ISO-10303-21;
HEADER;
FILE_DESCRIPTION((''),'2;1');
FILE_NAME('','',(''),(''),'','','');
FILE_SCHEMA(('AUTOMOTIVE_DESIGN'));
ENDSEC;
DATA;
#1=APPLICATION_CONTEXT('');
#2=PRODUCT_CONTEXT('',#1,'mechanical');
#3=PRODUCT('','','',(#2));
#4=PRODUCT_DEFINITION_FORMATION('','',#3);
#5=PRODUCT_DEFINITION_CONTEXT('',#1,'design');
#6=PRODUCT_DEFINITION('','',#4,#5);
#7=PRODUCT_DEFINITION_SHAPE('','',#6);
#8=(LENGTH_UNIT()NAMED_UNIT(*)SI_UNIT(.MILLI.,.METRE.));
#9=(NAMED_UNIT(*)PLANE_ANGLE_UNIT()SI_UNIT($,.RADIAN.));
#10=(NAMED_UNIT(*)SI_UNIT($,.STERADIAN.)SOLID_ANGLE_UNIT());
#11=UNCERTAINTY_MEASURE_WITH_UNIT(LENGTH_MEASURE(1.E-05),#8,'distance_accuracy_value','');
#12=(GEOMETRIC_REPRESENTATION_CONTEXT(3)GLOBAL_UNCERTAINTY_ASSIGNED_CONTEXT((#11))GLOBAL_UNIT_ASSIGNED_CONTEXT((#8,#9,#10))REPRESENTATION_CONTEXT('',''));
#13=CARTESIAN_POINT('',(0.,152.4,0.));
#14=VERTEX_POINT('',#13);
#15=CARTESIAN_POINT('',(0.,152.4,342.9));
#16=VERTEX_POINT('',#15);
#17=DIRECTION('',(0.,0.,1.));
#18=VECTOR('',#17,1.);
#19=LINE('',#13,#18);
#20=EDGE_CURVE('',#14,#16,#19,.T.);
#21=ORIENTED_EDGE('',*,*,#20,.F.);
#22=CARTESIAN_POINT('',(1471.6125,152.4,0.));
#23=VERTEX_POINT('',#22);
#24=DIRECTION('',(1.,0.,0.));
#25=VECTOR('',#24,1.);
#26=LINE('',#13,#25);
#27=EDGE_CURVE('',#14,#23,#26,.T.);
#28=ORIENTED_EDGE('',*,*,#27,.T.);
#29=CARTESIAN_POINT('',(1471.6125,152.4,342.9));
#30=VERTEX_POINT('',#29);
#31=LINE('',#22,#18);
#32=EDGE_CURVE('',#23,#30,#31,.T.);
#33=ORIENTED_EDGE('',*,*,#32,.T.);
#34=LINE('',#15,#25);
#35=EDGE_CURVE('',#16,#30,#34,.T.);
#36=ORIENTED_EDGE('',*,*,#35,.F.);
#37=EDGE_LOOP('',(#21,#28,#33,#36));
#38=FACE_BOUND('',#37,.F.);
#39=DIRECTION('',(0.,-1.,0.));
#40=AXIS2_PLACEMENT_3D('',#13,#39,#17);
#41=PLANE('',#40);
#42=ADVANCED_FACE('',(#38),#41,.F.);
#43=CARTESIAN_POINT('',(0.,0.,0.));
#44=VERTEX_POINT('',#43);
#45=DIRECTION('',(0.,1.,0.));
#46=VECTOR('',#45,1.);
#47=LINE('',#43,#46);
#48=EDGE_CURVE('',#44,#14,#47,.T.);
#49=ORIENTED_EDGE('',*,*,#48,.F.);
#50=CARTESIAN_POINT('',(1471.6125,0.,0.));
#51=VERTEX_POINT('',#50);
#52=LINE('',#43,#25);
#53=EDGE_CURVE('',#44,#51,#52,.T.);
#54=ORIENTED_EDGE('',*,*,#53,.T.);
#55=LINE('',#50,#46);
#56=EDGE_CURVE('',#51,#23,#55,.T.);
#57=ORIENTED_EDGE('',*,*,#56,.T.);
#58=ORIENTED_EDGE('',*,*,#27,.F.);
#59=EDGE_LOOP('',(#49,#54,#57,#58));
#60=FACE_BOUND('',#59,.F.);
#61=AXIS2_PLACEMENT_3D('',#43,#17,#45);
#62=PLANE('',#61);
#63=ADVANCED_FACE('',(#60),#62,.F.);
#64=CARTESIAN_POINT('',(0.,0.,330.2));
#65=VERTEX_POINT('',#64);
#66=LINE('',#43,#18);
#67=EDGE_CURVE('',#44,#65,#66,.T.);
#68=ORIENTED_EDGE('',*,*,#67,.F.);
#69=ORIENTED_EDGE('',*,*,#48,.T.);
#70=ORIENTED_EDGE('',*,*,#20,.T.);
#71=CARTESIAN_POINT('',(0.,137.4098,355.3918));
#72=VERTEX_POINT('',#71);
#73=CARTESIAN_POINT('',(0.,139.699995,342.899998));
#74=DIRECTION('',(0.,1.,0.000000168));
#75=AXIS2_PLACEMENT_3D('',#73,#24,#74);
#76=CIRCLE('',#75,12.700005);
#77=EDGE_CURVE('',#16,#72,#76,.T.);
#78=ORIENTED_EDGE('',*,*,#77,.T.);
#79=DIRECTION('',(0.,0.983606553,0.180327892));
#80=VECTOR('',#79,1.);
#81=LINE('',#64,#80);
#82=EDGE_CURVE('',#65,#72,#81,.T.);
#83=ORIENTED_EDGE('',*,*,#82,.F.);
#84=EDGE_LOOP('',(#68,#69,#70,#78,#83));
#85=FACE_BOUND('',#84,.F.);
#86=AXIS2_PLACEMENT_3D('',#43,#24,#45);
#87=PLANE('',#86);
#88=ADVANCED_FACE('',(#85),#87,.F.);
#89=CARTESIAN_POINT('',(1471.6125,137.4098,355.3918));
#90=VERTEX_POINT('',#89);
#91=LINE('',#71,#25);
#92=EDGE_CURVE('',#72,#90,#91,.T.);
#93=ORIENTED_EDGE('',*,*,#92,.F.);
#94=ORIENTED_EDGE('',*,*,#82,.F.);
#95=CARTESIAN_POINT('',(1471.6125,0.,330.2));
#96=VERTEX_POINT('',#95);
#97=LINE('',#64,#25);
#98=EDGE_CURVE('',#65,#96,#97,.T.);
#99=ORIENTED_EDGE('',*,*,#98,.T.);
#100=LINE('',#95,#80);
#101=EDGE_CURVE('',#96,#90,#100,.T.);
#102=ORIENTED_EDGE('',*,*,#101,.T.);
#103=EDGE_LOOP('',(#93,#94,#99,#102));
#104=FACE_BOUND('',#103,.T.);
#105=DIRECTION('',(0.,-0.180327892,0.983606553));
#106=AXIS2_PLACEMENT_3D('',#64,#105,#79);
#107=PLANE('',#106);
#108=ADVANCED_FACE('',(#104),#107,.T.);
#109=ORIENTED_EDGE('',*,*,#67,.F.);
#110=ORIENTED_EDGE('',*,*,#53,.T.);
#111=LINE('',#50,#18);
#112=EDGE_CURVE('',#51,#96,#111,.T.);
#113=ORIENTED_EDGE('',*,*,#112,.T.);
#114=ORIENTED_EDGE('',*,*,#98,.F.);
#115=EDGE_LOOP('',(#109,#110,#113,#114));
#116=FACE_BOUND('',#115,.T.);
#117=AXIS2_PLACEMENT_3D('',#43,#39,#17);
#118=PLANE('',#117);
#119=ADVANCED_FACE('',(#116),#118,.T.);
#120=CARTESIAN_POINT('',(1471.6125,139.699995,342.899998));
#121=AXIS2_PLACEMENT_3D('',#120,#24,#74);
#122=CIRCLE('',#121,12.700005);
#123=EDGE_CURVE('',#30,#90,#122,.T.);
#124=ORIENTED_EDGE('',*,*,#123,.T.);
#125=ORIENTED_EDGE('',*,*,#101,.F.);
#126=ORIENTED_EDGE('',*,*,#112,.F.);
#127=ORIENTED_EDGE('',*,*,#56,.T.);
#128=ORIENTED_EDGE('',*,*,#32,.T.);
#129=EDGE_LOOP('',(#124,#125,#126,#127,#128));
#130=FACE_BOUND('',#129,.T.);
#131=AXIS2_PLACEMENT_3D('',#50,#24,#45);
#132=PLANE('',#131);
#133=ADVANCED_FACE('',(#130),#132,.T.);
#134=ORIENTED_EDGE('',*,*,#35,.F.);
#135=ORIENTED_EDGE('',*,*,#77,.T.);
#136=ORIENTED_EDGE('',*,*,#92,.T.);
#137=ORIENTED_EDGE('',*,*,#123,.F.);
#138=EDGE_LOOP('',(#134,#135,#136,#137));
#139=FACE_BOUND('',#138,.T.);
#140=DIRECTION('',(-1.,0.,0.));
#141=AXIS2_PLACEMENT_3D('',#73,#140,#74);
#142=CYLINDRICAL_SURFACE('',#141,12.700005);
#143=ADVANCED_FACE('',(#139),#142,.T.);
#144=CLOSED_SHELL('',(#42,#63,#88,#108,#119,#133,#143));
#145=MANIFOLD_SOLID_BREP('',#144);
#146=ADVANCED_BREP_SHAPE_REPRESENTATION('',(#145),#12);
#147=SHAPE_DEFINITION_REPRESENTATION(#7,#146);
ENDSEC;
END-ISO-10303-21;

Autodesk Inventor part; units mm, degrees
ref_plane "YZ Plane" through (0, 0, 0) normal (1, 0, 0) x (0, 1, 0)
ref_plane "XZ Plane" through (0, 0, 0) normal (0, 1, 0) x (-1, 0, 0)
ref_plane "XY Plane" through (0, 0, 0) normal (0, 0, 1) x (1, 0, 0)
sketch "Profile" plane through (0, 0, 0) normal (0, 0, 1) x (1, 0, 0)
  line L0 (0, 0) -> (0, 330.2)
  line L1 (0, 0) -> (152.4, 0)
  line L2 (152.4, 0) -> (152.4, 342.9)
  line L3 (152.4, 342.9) -> (139.7, 342.9) construction
  line L4 (152.4, 342.9) -> (139.7, 342.9) construction
  arc A0 (152.4, 342.9) -> (137.4098, 355.3918) centre (139.7, 342.9) ccw
  line L5 (0, 330.2) -> (137.4098, 355.3918)
  dimension "d0" = 330.2
  dimension "d1" = 152.4
  dimension "d2" = 342.9
  dimension "d3" = 12.7
  dimension "d4" = 12.7
sketch "Sketch1" plane through (0, 0, 0) normal (1, 0, 0) x (0, 1, 0)
  line L0 (0, 0) -> (0, 330.2)
  line L1 (0, 0) -> (152.4, 0)
  line L2 (152.4, 0) -> (152.4, 342.9)
  line L3 (152.4, 342.9) -> (139.7, 342.9) construction
  line L4 (152.4, 342.9) -> (139.7, 342.9) construction
  arc A0 (152.4, 342.9) -> (137.4098, 355.3918) centre (139.7, 342.9) ccw
  line L5 (0, 330.2) -> (137.4098, 355.3918)
extrude "Extrusion1" add sketch "Sketch1" along normal blind 1471.6125
properties part number "I" material "Granite, Cut, Polished"
